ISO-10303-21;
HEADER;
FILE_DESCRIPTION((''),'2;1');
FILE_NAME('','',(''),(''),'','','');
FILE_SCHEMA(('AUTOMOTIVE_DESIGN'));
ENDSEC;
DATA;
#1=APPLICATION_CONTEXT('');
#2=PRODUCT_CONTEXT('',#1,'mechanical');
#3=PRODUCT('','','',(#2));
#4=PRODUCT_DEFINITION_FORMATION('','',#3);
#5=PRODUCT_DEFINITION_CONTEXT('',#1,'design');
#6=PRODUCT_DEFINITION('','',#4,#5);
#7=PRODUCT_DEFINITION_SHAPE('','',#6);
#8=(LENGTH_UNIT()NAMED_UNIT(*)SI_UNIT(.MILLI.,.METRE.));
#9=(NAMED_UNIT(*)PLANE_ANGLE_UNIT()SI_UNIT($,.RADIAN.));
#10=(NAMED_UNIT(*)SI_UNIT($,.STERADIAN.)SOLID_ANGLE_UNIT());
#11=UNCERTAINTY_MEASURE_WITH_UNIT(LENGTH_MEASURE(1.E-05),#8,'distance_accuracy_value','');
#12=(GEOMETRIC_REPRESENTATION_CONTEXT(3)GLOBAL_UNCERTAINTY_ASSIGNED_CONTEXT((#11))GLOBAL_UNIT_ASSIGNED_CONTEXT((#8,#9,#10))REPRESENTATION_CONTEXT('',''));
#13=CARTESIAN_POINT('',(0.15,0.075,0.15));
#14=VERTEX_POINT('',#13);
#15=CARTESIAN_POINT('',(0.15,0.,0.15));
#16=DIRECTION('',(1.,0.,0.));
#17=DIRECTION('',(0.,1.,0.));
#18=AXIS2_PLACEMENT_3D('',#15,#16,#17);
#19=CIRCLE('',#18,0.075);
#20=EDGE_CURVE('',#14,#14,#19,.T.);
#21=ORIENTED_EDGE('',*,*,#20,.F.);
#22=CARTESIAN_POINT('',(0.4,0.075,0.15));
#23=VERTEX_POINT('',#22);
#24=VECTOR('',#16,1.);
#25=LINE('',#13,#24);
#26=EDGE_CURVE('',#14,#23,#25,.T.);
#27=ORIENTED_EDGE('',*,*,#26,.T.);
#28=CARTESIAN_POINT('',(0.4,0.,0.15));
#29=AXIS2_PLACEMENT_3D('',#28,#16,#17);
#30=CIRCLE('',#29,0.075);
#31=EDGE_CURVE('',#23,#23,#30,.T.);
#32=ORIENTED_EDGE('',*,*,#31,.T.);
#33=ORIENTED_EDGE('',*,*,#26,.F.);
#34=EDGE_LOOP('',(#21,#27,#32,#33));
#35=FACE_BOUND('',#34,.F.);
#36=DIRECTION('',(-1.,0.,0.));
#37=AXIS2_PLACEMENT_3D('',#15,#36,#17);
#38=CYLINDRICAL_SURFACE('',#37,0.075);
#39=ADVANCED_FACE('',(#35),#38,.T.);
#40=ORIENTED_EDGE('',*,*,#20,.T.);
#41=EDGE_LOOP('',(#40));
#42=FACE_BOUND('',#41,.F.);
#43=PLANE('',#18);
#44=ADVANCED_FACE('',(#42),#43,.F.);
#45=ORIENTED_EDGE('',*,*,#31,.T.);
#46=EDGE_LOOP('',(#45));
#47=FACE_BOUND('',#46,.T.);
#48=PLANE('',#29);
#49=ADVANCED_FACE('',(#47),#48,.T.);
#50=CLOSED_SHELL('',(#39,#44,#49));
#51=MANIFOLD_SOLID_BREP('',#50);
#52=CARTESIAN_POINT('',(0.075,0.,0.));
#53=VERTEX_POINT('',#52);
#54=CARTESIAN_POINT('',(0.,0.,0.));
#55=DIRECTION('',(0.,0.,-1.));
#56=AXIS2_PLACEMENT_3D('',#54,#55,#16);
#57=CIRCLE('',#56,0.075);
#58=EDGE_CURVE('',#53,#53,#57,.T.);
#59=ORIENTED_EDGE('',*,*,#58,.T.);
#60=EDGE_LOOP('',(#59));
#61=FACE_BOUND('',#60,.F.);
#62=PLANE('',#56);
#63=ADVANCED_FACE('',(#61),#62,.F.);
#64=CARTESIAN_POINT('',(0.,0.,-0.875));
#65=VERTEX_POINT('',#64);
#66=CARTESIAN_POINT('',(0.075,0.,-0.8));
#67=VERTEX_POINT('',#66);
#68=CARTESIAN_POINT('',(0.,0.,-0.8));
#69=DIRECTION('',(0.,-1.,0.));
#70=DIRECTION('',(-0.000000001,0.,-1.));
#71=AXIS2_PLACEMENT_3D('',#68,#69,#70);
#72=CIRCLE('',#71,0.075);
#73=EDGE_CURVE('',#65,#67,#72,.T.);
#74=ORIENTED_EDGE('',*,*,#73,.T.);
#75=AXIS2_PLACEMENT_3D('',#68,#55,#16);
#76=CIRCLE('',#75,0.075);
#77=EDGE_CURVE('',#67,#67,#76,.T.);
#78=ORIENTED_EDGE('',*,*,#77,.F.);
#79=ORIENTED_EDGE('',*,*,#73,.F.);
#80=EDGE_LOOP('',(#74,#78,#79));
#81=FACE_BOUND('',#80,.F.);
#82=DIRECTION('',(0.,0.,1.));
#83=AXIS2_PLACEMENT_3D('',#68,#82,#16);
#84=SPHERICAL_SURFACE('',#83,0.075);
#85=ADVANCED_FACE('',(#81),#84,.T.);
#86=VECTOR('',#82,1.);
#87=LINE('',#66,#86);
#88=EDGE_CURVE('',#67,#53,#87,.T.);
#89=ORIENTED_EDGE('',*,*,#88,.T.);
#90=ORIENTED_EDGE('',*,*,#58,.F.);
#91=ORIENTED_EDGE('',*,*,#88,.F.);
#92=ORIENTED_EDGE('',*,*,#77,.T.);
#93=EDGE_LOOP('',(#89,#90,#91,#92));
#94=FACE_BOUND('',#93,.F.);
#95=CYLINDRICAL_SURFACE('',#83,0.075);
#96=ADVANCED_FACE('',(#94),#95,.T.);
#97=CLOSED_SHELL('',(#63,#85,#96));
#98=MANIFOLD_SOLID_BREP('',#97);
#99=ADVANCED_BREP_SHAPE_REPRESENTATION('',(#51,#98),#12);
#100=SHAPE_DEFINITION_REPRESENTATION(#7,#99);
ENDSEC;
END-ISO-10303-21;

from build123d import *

# Parameters (mm, degrees)
F4_R     = 0.075
F5_DEPTH = 0.25


# Not quite as in the source:
# - the program builds the solid bodies; features that only make, move or delete a surface that nothing else refers to are left out


with BuildPart() as f1:
    # F0 (on Front) → F1 (revolve)
    with BuildSketch(Plane.XZ):
        with BuildLine():
            Line((0.075, 0), (0, 0))
            Line((0, 0), (0, -0.875))
            ThreePointArc((0, -0.875), (0.0530330086, -0.8530330086), (0.075, -0.8))
            Line((0.075, -0.8), (0.075, 0))
        make_face()
    revolve(axis=Axis((0, 0, -0.4375), (0, 0, -1)))


with BuildPart() as f5:
    # F4 (on offset) → F5 (new body)
    with BuildSketch(Plane.YZ.offset(0.15)):
        with Locations((0, 0.15)):
            Circle(F4_R)
    extrude(amount=F5_DEPTH)


solid = Compound([f1.part, f5.part])
